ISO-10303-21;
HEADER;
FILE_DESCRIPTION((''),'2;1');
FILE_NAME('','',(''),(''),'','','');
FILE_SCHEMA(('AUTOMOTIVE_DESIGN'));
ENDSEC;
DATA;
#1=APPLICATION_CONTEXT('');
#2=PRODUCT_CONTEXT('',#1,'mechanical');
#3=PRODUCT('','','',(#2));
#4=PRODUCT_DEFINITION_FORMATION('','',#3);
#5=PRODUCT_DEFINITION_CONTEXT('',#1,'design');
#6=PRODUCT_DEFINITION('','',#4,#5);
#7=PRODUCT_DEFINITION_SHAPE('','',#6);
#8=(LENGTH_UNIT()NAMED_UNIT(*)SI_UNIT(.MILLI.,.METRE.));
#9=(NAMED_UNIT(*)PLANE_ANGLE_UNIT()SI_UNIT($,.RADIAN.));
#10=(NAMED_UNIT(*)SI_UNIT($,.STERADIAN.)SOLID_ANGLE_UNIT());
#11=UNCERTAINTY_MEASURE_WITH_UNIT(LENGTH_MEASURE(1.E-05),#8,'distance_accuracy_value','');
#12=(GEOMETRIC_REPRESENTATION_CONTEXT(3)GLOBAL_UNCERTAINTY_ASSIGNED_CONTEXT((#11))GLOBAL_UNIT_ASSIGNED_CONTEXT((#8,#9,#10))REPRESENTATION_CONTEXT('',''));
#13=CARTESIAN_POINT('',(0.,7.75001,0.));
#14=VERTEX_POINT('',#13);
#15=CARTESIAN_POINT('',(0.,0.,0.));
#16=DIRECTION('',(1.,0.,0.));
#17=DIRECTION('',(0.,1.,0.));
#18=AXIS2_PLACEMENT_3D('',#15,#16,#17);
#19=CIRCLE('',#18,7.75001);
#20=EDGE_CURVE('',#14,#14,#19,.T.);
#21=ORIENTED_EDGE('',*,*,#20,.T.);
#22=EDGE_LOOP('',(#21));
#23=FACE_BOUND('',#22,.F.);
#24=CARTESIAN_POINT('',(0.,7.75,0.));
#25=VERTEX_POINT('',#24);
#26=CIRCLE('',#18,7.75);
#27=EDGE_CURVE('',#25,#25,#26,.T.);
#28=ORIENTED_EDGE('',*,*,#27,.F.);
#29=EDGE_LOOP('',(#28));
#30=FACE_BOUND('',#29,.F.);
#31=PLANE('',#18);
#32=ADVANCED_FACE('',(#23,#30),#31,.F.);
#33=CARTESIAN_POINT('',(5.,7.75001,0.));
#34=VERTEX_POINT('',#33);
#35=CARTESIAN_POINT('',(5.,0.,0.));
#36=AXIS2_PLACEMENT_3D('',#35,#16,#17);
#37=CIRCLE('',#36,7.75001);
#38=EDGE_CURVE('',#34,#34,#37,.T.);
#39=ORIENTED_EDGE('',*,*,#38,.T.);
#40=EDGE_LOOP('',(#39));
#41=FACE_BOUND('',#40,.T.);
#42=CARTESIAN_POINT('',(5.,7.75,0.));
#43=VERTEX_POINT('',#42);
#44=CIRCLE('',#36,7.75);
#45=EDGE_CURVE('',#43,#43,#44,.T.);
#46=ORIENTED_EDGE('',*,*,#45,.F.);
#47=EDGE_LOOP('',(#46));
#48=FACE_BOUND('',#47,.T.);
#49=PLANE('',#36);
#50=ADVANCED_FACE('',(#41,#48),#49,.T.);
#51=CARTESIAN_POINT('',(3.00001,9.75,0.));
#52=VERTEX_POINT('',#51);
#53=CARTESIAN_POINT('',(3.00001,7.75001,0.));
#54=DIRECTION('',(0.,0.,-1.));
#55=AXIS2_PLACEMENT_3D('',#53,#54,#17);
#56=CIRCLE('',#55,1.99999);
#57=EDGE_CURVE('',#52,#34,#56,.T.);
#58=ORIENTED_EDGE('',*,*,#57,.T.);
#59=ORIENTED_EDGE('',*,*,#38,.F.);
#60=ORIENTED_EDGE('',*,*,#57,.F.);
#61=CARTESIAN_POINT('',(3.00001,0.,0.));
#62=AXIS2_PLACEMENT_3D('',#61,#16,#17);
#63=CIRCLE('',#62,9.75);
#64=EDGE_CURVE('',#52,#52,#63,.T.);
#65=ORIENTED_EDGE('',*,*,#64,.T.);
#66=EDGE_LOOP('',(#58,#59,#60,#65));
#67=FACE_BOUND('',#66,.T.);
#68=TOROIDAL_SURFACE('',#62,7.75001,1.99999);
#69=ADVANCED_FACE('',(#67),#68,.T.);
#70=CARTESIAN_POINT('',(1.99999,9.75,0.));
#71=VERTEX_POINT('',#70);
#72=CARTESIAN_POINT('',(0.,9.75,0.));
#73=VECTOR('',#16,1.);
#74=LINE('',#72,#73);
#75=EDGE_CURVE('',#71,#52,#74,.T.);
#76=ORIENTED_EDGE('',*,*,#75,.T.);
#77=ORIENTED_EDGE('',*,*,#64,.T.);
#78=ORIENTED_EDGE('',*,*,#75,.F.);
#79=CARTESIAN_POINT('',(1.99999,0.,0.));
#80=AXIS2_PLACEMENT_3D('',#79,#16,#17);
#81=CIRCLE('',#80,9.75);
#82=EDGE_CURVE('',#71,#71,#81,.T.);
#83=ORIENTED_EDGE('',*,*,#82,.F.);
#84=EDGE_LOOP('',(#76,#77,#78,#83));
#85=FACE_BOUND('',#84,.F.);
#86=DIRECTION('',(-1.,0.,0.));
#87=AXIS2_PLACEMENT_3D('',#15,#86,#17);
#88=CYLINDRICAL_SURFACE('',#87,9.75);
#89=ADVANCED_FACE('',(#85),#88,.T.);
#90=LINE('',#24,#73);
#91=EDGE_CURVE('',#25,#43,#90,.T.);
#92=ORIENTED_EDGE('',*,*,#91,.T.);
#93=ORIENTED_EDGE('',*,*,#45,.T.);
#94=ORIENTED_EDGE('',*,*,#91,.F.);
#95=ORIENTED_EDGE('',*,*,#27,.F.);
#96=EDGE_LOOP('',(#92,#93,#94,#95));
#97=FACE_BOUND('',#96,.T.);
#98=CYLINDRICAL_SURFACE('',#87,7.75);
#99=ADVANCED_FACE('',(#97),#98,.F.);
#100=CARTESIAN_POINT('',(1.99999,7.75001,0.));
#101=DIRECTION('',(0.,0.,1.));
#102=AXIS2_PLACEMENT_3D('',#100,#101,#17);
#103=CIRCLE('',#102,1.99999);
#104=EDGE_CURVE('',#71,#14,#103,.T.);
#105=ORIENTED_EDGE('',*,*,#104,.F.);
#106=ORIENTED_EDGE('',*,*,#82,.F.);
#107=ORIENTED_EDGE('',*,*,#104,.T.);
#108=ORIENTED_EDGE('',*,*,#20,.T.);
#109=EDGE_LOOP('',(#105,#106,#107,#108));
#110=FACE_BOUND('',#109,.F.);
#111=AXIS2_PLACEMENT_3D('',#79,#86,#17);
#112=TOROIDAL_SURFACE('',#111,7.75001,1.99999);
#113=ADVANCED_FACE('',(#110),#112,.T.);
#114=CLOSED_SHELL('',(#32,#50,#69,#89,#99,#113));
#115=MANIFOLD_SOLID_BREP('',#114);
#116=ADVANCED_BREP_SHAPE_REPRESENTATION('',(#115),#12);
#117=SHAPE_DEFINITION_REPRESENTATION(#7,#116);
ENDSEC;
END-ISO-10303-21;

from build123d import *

# Parameters (mm, degrees)
F0_R     = 9.75
F0_R_2   = 7.75
F1_DEPTH = 5
F2_R     = 1.99999
F3_R     = 1.99999


# Not quite as in the source:
# - a fillet or chamfer is up to 0.001 mm smaller than in the source, because OpenCascade refuses the exact size


with BuildPart() as f1:
    # F0 (on Right) → F1 (new body)
    with BuildSketch(Plane.YZ):
        Circle(F0_R)
        Circle(F0_R_2, mode=Mode.SUBTRACT)
    extrude(amount=F1_DEPTH)

    # F2 (radius 2 in the source; OpenCascade refuses exactly that, so slightly less here)
    f2_edges = [f1.edges().sort_by_distance(p)[0] for p in [
        (0, -9.75, 0),
    ]]
    fillet(f2_edges, radius=F2_R)

    # F3 (radius 2 in the source; OpenCascade refuses exactly that, so slightly less here)
    f3_edges = [f1.edges().sort_by_distance(p)[0] for p in [
        (5, -9.75, 0),
    ]]
    fillet(f3_edges, radius=F3_R)


solid = f1.part
